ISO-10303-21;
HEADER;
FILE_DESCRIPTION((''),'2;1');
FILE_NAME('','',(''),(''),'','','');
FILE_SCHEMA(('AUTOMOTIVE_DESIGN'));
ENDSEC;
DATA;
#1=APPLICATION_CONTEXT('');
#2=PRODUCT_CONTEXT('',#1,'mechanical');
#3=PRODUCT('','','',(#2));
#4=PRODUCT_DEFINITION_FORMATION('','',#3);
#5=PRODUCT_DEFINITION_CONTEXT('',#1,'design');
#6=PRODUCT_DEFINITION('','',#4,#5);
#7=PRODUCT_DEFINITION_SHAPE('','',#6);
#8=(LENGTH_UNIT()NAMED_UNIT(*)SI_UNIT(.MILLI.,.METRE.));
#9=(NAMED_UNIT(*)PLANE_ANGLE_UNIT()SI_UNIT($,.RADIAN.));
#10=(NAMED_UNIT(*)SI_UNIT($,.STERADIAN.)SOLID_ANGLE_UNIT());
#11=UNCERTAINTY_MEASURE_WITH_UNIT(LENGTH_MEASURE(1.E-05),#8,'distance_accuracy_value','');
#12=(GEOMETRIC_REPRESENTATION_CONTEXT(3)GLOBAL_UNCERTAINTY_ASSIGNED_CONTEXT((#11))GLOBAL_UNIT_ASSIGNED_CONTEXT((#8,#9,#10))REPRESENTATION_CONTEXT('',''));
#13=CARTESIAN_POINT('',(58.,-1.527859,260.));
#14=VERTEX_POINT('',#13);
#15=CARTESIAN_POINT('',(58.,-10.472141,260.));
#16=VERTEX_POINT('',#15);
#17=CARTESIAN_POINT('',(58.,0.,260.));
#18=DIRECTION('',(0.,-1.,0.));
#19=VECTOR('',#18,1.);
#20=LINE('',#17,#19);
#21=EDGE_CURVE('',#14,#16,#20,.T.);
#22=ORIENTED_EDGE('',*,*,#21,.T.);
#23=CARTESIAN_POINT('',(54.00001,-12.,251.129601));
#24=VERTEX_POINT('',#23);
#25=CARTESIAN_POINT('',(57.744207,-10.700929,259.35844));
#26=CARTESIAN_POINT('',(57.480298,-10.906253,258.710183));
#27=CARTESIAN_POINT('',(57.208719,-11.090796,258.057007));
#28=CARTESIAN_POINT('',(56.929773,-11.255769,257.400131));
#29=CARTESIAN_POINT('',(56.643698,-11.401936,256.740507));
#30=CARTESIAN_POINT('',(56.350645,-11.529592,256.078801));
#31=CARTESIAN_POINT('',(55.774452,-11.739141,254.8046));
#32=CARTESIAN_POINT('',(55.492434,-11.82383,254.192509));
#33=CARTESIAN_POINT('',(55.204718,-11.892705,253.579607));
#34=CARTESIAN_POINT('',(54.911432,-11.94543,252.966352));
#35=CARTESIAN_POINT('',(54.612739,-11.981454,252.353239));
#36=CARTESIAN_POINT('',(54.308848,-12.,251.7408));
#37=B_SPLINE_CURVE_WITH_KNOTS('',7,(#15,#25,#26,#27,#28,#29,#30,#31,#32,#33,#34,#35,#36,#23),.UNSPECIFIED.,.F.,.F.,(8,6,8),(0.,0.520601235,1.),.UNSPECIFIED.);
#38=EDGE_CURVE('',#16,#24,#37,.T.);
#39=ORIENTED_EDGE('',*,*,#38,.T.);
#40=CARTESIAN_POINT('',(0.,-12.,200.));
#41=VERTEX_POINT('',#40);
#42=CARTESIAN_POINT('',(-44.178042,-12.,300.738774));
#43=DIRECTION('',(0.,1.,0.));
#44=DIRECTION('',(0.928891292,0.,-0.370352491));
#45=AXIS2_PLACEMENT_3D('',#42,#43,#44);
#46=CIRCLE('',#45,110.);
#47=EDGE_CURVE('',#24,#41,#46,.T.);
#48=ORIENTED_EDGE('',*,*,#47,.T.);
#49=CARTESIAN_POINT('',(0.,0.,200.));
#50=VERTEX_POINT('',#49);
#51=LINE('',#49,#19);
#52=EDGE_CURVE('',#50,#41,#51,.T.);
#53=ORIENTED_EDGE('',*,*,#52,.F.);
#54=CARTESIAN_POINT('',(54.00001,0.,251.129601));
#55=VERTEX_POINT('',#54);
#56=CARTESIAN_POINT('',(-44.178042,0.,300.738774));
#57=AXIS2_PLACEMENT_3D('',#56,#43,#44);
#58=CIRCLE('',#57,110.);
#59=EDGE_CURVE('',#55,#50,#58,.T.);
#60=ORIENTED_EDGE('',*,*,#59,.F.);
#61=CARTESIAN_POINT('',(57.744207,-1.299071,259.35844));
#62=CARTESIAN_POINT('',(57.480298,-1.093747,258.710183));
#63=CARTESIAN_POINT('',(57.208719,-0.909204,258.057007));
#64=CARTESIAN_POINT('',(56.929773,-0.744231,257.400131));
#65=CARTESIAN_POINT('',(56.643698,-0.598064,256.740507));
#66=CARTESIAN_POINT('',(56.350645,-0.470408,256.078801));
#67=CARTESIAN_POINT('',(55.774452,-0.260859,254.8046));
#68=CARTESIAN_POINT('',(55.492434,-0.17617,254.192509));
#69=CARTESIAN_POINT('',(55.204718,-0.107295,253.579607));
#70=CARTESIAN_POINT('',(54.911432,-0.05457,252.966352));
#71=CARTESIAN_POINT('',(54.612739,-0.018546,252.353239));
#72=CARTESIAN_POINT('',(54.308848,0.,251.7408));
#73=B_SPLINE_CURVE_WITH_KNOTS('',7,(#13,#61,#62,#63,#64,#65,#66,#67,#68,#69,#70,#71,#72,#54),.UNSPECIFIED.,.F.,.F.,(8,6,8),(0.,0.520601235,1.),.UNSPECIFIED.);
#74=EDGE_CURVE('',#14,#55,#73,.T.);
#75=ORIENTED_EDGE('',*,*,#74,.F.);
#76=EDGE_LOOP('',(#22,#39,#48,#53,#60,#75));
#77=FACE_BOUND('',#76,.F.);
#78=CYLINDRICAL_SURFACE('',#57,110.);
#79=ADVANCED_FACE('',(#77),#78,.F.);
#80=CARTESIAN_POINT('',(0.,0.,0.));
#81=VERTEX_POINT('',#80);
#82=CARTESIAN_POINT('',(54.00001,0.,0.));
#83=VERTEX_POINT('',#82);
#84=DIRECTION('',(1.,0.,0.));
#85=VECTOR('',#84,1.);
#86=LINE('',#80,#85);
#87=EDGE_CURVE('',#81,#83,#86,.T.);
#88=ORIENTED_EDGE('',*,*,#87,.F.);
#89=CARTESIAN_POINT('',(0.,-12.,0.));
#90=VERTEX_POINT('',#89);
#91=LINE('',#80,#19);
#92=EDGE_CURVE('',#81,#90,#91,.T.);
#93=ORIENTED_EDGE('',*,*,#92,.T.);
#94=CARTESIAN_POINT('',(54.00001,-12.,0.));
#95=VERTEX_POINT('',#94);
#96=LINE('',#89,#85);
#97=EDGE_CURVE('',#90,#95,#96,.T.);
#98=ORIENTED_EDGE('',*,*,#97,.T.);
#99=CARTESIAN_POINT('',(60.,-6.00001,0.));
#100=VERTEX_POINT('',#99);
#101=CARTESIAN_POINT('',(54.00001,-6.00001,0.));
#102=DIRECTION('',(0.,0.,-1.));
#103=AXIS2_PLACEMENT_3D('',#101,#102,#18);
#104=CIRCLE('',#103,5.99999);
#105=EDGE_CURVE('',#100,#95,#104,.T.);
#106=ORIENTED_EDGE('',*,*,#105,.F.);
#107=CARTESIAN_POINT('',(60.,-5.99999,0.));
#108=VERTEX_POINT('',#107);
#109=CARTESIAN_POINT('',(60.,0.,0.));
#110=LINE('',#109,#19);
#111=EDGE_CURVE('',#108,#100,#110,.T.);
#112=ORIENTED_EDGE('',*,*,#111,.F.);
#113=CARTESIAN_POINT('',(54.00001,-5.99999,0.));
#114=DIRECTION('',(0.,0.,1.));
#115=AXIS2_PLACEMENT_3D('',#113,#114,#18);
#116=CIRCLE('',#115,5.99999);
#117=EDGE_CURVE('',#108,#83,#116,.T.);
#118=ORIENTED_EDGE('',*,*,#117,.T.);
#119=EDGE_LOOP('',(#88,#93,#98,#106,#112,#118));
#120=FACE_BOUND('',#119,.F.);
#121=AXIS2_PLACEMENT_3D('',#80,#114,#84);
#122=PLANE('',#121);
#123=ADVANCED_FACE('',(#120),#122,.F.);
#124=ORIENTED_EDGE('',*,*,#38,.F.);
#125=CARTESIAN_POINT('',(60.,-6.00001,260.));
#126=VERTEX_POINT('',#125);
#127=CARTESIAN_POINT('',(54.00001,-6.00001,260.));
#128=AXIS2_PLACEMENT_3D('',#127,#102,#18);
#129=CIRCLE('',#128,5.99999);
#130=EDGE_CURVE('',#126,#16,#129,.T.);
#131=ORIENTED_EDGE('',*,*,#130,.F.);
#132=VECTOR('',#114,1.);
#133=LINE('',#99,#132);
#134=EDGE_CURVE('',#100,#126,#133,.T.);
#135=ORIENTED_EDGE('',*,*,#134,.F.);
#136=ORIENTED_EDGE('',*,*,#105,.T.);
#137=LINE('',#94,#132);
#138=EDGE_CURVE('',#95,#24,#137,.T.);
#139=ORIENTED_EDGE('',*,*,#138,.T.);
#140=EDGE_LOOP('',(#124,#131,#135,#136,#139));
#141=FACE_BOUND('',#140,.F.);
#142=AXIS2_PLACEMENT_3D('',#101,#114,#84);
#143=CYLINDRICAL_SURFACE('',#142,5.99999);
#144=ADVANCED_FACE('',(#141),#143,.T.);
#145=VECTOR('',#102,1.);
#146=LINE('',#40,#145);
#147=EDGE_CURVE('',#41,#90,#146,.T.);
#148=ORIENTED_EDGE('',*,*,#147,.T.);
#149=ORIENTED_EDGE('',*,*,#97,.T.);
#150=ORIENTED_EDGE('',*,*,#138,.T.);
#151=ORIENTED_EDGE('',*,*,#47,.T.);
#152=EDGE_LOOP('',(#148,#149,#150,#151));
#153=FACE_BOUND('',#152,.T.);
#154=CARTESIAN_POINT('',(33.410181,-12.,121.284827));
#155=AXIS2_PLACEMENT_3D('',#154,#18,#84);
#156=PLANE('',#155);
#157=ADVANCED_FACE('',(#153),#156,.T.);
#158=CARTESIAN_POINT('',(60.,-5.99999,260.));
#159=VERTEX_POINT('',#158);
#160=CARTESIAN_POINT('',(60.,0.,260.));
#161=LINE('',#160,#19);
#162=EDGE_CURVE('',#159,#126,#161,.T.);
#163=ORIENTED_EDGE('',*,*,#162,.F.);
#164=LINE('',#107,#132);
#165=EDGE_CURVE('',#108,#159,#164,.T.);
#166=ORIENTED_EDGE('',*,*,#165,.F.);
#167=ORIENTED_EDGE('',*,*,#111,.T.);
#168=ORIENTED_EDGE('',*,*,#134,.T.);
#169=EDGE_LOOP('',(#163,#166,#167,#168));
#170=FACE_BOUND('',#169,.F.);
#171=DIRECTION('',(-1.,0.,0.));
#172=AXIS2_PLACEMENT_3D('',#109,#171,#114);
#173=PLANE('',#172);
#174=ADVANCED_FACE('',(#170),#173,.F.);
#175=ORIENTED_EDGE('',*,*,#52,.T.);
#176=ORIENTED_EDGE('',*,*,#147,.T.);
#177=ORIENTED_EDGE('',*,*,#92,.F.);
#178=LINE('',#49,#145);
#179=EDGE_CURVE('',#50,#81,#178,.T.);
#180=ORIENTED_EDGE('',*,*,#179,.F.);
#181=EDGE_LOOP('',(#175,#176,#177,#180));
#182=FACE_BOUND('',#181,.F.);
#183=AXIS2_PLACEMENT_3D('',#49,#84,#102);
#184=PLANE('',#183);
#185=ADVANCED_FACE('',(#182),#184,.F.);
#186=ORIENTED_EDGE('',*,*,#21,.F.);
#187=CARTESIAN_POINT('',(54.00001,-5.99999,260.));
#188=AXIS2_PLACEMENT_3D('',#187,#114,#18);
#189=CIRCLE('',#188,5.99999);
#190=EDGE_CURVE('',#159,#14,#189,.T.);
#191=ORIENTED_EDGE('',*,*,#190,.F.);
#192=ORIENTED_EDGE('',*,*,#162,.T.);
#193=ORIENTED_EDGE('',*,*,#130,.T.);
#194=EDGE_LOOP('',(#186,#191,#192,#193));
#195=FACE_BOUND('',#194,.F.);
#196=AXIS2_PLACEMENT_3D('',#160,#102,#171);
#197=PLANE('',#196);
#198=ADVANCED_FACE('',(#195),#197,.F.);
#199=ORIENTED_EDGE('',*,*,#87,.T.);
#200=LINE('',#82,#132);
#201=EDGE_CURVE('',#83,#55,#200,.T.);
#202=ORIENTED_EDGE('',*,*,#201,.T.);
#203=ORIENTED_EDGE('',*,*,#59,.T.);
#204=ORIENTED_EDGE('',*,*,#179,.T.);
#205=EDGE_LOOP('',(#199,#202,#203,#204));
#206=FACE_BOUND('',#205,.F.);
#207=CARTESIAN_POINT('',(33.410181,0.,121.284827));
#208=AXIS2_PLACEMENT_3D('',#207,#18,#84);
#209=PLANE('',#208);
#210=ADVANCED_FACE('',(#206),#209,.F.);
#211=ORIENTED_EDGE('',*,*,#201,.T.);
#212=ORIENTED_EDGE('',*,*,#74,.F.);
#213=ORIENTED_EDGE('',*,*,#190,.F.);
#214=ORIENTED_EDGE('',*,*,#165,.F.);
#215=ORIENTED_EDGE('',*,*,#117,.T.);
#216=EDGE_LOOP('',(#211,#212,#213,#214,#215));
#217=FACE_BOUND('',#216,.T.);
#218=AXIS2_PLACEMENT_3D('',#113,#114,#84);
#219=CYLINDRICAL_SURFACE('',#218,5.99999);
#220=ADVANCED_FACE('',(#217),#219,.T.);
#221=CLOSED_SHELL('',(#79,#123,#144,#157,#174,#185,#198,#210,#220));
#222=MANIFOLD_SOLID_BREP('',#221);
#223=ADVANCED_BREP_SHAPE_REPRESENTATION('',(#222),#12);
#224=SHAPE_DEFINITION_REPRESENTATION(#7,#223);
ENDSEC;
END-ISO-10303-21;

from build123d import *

# Parameters (mm, degrees)
F1_DEPTH = 12
F2_R     = 5.99999


# Not quite as in the source:
# - a fillet or chamfer is up to 0.001 mm smaller than in the source, because OpenCascade refuses the exact size


with BuildPart() as f1:
    # F0 (on Front) → F1 (new body)
    with BuildSketch(Plane.XZ):
        with BuildLine():
            Line((0, 200), (0, 0))
            Line((0, 0), (60, 0))
            Line((60, 0), (60, 260))
            Line((60, 260), (58, 260))
            ThreePointArc((58, 260), (34.9106792543, 224.2863433875), (0, 200))
        make_face()
    extrude(amount=F1_DEPTH)

    # F2 (radius 6 in the source; OpenCascade refuses exactly that, so slightly less here)
    f2_edges = [f1.edges().sort_by_distance(p)[0] for p in [
        (60, -12, 130),
        (60, 0, 130),
    ]]
    fillet(f2_edges, radius=F2_R)


solid = f1.part
